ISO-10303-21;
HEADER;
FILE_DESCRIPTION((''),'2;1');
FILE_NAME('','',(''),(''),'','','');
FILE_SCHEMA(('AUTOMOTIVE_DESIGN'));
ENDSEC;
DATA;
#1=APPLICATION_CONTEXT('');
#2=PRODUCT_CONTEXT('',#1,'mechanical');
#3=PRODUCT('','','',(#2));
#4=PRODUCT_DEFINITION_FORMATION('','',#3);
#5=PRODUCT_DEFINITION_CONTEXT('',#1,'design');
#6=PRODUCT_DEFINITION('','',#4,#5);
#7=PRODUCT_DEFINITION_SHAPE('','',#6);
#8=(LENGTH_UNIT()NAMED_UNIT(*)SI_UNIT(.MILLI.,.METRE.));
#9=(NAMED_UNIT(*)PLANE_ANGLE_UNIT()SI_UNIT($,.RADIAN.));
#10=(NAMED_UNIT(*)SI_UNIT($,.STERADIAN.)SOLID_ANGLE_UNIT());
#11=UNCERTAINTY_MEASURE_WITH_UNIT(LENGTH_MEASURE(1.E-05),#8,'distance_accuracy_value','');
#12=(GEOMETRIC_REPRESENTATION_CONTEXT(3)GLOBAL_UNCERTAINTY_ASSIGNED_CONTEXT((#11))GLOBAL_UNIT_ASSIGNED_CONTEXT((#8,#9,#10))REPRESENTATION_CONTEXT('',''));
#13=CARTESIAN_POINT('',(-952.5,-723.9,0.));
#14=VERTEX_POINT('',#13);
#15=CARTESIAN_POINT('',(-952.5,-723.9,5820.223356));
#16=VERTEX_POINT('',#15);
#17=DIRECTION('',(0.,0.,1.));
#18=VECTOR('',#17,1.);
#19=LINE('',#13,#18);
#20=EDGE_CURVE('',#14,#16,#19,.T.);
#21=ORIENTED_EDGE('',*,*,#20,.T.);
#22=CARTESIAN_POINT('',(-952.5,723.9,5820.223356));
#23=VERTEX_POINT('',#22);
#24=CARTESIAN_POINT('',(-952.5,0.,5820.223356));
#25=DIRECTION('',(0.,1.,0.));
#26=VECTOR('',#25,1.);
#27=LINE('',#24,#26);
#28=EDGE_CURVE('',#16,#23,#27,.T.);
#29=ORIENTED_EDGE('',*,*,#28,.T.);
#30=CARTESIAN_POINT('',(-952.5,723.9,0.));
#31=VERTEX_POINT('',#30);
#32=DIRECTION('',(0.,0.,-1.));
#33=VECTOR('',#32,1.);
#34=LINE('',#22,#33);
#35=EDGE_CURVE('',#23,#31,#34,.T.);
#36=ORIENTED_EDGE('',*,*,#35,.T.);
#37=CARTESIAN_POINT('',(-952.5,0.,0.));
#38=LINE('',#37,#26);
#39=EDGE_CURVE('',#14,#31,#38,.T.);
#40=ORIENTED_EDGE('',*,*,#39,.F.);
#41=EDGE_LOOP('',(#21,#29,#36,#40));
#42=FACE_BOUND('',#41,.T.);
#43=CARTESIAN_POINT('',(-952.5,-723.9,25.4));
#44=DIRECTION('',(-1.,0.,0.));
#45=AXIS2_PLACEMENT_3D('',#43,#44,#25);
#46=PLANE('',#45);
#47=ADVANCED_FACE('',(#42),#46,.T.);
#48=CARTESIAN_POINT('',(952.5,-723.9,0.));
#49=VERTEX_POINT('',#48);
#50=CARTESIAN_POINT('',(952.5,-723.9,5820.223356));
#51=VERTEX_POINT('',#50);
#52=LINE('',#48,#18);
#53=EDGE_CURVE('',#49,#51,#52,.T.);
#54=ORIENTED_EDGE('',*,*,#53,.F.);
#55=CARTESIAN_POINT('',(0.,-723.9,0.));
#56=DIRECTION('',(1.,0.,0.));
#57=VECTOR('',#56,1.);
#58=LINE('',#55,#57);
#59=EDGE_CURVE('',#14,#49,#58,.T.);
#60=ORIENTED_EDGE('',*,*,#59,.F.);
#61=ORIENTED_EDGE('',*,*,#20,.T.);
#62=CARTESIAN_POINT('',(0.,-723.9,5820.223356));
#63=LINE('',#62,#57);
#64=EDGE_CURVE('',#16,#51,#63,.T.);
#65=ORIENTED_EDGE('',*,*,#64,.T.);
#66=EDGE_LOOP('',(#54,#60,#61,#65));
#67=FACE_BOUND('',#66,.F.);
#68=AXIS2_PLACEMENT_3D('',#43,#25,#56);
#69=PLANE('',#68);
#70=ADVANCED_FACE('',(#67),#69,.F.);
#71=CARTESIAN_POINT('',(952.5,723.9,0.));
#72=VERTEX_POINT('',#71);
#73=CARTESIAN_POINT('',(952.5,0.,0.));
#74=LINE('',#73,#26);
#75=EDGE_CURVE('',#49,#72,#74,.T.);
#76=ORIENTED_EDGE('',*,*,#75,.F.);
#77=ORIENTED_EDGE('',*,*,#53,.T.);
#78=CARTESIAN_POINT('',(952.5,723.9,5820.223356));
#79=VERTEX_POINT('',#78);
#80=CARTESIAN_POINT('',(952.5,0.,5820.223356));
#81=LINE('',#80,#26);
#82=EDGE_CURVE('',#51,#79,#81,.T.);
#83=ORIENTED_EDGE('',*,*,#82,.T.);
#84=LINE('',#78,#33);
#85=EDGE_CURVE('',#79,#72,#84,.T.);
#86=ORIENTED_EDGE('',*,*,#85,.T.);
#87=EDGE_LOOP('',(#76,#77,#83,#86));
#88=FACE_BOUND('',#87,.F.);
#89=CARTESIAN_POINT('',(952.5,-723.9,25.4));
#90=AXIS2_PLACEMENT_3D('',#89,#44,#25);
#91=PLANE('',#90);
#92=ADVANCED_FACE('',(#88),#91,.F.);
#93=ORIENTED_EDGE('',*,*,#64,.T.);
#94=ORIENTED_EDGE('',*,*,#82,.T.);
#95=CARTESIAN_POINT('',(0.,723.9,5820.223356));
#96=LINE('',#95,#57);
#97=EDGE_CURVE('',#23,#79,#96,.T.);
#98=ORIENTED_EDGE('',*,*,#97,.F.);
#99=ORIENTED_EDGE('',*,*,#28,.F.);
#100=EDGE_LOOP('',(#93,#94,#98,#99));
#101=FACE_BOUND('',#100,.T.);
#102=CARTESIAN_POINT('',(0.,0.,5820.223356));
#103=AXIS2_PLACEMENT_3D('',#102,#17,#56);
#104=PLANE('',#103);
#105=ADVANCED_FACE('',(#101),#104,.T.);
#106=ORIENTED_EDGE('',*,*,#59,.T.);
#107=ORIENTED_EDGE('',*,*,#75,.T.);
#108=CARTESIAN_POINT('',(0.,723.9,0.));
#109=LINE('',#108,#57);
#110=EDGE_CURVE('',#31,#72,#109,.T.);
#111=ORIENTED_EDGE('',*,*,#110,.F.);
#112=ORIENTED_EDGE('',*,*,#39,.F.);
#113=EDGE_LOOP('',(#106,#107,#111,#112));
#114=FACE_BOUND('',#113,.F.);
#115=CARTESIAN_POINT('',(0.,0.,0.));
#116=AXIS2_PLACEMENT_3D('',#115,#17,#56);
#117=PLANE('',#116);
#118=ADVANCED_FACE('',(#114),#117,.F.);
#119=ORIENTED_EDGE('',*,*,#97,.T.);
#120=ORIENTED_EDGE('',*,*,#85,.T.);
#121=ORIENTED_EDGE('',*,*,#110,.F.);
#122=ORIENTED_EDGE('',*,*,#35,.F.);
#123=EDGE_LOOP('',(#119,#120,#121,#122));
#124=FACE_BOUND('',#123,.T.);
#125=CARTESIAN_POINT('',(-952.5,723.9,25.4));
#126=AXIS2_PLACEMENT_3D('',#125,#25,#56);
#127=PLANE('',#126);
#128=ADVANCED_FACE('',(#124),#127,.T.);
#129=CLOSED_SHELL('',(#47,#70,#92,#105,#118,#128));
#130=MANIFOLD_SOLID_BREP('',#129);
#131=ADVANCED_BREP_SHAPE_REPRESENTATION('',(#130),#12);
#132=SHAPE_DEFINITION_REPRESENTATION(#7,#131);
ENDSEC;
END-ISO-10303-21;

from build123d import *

# Parameters (mm, degrees)
F0_W     = 1905
F0_H     = 1447.8
F1_DEPTH = 25.4
F2_W     = 1905
F2_H     = 1447.8
F3_DEPTH = 5794.8233563


# Not quite as in the source:
# - an extrude ends at something that could not be found from the text; its depth is read off the source's solid
# - a feature of the source that left no trace in its solid (it failed there, or was rolled back) is left out


with BuildPart() as f1:
    # F0 (on Top) → F1 (new body)
    with BuildSketch(Plane.XY):
        Rectangle(F0_W, F0_H)
    extrude(amount=F1_DEPTH)

    # F2 (on face) → F3 (join, through all)
    with BuildSketch(Plane.XY.offset(25.4)):
        Rectangle(F2_W, F2_H)
    extrude(amount=F3_DEPTH)


solid = f1.part
